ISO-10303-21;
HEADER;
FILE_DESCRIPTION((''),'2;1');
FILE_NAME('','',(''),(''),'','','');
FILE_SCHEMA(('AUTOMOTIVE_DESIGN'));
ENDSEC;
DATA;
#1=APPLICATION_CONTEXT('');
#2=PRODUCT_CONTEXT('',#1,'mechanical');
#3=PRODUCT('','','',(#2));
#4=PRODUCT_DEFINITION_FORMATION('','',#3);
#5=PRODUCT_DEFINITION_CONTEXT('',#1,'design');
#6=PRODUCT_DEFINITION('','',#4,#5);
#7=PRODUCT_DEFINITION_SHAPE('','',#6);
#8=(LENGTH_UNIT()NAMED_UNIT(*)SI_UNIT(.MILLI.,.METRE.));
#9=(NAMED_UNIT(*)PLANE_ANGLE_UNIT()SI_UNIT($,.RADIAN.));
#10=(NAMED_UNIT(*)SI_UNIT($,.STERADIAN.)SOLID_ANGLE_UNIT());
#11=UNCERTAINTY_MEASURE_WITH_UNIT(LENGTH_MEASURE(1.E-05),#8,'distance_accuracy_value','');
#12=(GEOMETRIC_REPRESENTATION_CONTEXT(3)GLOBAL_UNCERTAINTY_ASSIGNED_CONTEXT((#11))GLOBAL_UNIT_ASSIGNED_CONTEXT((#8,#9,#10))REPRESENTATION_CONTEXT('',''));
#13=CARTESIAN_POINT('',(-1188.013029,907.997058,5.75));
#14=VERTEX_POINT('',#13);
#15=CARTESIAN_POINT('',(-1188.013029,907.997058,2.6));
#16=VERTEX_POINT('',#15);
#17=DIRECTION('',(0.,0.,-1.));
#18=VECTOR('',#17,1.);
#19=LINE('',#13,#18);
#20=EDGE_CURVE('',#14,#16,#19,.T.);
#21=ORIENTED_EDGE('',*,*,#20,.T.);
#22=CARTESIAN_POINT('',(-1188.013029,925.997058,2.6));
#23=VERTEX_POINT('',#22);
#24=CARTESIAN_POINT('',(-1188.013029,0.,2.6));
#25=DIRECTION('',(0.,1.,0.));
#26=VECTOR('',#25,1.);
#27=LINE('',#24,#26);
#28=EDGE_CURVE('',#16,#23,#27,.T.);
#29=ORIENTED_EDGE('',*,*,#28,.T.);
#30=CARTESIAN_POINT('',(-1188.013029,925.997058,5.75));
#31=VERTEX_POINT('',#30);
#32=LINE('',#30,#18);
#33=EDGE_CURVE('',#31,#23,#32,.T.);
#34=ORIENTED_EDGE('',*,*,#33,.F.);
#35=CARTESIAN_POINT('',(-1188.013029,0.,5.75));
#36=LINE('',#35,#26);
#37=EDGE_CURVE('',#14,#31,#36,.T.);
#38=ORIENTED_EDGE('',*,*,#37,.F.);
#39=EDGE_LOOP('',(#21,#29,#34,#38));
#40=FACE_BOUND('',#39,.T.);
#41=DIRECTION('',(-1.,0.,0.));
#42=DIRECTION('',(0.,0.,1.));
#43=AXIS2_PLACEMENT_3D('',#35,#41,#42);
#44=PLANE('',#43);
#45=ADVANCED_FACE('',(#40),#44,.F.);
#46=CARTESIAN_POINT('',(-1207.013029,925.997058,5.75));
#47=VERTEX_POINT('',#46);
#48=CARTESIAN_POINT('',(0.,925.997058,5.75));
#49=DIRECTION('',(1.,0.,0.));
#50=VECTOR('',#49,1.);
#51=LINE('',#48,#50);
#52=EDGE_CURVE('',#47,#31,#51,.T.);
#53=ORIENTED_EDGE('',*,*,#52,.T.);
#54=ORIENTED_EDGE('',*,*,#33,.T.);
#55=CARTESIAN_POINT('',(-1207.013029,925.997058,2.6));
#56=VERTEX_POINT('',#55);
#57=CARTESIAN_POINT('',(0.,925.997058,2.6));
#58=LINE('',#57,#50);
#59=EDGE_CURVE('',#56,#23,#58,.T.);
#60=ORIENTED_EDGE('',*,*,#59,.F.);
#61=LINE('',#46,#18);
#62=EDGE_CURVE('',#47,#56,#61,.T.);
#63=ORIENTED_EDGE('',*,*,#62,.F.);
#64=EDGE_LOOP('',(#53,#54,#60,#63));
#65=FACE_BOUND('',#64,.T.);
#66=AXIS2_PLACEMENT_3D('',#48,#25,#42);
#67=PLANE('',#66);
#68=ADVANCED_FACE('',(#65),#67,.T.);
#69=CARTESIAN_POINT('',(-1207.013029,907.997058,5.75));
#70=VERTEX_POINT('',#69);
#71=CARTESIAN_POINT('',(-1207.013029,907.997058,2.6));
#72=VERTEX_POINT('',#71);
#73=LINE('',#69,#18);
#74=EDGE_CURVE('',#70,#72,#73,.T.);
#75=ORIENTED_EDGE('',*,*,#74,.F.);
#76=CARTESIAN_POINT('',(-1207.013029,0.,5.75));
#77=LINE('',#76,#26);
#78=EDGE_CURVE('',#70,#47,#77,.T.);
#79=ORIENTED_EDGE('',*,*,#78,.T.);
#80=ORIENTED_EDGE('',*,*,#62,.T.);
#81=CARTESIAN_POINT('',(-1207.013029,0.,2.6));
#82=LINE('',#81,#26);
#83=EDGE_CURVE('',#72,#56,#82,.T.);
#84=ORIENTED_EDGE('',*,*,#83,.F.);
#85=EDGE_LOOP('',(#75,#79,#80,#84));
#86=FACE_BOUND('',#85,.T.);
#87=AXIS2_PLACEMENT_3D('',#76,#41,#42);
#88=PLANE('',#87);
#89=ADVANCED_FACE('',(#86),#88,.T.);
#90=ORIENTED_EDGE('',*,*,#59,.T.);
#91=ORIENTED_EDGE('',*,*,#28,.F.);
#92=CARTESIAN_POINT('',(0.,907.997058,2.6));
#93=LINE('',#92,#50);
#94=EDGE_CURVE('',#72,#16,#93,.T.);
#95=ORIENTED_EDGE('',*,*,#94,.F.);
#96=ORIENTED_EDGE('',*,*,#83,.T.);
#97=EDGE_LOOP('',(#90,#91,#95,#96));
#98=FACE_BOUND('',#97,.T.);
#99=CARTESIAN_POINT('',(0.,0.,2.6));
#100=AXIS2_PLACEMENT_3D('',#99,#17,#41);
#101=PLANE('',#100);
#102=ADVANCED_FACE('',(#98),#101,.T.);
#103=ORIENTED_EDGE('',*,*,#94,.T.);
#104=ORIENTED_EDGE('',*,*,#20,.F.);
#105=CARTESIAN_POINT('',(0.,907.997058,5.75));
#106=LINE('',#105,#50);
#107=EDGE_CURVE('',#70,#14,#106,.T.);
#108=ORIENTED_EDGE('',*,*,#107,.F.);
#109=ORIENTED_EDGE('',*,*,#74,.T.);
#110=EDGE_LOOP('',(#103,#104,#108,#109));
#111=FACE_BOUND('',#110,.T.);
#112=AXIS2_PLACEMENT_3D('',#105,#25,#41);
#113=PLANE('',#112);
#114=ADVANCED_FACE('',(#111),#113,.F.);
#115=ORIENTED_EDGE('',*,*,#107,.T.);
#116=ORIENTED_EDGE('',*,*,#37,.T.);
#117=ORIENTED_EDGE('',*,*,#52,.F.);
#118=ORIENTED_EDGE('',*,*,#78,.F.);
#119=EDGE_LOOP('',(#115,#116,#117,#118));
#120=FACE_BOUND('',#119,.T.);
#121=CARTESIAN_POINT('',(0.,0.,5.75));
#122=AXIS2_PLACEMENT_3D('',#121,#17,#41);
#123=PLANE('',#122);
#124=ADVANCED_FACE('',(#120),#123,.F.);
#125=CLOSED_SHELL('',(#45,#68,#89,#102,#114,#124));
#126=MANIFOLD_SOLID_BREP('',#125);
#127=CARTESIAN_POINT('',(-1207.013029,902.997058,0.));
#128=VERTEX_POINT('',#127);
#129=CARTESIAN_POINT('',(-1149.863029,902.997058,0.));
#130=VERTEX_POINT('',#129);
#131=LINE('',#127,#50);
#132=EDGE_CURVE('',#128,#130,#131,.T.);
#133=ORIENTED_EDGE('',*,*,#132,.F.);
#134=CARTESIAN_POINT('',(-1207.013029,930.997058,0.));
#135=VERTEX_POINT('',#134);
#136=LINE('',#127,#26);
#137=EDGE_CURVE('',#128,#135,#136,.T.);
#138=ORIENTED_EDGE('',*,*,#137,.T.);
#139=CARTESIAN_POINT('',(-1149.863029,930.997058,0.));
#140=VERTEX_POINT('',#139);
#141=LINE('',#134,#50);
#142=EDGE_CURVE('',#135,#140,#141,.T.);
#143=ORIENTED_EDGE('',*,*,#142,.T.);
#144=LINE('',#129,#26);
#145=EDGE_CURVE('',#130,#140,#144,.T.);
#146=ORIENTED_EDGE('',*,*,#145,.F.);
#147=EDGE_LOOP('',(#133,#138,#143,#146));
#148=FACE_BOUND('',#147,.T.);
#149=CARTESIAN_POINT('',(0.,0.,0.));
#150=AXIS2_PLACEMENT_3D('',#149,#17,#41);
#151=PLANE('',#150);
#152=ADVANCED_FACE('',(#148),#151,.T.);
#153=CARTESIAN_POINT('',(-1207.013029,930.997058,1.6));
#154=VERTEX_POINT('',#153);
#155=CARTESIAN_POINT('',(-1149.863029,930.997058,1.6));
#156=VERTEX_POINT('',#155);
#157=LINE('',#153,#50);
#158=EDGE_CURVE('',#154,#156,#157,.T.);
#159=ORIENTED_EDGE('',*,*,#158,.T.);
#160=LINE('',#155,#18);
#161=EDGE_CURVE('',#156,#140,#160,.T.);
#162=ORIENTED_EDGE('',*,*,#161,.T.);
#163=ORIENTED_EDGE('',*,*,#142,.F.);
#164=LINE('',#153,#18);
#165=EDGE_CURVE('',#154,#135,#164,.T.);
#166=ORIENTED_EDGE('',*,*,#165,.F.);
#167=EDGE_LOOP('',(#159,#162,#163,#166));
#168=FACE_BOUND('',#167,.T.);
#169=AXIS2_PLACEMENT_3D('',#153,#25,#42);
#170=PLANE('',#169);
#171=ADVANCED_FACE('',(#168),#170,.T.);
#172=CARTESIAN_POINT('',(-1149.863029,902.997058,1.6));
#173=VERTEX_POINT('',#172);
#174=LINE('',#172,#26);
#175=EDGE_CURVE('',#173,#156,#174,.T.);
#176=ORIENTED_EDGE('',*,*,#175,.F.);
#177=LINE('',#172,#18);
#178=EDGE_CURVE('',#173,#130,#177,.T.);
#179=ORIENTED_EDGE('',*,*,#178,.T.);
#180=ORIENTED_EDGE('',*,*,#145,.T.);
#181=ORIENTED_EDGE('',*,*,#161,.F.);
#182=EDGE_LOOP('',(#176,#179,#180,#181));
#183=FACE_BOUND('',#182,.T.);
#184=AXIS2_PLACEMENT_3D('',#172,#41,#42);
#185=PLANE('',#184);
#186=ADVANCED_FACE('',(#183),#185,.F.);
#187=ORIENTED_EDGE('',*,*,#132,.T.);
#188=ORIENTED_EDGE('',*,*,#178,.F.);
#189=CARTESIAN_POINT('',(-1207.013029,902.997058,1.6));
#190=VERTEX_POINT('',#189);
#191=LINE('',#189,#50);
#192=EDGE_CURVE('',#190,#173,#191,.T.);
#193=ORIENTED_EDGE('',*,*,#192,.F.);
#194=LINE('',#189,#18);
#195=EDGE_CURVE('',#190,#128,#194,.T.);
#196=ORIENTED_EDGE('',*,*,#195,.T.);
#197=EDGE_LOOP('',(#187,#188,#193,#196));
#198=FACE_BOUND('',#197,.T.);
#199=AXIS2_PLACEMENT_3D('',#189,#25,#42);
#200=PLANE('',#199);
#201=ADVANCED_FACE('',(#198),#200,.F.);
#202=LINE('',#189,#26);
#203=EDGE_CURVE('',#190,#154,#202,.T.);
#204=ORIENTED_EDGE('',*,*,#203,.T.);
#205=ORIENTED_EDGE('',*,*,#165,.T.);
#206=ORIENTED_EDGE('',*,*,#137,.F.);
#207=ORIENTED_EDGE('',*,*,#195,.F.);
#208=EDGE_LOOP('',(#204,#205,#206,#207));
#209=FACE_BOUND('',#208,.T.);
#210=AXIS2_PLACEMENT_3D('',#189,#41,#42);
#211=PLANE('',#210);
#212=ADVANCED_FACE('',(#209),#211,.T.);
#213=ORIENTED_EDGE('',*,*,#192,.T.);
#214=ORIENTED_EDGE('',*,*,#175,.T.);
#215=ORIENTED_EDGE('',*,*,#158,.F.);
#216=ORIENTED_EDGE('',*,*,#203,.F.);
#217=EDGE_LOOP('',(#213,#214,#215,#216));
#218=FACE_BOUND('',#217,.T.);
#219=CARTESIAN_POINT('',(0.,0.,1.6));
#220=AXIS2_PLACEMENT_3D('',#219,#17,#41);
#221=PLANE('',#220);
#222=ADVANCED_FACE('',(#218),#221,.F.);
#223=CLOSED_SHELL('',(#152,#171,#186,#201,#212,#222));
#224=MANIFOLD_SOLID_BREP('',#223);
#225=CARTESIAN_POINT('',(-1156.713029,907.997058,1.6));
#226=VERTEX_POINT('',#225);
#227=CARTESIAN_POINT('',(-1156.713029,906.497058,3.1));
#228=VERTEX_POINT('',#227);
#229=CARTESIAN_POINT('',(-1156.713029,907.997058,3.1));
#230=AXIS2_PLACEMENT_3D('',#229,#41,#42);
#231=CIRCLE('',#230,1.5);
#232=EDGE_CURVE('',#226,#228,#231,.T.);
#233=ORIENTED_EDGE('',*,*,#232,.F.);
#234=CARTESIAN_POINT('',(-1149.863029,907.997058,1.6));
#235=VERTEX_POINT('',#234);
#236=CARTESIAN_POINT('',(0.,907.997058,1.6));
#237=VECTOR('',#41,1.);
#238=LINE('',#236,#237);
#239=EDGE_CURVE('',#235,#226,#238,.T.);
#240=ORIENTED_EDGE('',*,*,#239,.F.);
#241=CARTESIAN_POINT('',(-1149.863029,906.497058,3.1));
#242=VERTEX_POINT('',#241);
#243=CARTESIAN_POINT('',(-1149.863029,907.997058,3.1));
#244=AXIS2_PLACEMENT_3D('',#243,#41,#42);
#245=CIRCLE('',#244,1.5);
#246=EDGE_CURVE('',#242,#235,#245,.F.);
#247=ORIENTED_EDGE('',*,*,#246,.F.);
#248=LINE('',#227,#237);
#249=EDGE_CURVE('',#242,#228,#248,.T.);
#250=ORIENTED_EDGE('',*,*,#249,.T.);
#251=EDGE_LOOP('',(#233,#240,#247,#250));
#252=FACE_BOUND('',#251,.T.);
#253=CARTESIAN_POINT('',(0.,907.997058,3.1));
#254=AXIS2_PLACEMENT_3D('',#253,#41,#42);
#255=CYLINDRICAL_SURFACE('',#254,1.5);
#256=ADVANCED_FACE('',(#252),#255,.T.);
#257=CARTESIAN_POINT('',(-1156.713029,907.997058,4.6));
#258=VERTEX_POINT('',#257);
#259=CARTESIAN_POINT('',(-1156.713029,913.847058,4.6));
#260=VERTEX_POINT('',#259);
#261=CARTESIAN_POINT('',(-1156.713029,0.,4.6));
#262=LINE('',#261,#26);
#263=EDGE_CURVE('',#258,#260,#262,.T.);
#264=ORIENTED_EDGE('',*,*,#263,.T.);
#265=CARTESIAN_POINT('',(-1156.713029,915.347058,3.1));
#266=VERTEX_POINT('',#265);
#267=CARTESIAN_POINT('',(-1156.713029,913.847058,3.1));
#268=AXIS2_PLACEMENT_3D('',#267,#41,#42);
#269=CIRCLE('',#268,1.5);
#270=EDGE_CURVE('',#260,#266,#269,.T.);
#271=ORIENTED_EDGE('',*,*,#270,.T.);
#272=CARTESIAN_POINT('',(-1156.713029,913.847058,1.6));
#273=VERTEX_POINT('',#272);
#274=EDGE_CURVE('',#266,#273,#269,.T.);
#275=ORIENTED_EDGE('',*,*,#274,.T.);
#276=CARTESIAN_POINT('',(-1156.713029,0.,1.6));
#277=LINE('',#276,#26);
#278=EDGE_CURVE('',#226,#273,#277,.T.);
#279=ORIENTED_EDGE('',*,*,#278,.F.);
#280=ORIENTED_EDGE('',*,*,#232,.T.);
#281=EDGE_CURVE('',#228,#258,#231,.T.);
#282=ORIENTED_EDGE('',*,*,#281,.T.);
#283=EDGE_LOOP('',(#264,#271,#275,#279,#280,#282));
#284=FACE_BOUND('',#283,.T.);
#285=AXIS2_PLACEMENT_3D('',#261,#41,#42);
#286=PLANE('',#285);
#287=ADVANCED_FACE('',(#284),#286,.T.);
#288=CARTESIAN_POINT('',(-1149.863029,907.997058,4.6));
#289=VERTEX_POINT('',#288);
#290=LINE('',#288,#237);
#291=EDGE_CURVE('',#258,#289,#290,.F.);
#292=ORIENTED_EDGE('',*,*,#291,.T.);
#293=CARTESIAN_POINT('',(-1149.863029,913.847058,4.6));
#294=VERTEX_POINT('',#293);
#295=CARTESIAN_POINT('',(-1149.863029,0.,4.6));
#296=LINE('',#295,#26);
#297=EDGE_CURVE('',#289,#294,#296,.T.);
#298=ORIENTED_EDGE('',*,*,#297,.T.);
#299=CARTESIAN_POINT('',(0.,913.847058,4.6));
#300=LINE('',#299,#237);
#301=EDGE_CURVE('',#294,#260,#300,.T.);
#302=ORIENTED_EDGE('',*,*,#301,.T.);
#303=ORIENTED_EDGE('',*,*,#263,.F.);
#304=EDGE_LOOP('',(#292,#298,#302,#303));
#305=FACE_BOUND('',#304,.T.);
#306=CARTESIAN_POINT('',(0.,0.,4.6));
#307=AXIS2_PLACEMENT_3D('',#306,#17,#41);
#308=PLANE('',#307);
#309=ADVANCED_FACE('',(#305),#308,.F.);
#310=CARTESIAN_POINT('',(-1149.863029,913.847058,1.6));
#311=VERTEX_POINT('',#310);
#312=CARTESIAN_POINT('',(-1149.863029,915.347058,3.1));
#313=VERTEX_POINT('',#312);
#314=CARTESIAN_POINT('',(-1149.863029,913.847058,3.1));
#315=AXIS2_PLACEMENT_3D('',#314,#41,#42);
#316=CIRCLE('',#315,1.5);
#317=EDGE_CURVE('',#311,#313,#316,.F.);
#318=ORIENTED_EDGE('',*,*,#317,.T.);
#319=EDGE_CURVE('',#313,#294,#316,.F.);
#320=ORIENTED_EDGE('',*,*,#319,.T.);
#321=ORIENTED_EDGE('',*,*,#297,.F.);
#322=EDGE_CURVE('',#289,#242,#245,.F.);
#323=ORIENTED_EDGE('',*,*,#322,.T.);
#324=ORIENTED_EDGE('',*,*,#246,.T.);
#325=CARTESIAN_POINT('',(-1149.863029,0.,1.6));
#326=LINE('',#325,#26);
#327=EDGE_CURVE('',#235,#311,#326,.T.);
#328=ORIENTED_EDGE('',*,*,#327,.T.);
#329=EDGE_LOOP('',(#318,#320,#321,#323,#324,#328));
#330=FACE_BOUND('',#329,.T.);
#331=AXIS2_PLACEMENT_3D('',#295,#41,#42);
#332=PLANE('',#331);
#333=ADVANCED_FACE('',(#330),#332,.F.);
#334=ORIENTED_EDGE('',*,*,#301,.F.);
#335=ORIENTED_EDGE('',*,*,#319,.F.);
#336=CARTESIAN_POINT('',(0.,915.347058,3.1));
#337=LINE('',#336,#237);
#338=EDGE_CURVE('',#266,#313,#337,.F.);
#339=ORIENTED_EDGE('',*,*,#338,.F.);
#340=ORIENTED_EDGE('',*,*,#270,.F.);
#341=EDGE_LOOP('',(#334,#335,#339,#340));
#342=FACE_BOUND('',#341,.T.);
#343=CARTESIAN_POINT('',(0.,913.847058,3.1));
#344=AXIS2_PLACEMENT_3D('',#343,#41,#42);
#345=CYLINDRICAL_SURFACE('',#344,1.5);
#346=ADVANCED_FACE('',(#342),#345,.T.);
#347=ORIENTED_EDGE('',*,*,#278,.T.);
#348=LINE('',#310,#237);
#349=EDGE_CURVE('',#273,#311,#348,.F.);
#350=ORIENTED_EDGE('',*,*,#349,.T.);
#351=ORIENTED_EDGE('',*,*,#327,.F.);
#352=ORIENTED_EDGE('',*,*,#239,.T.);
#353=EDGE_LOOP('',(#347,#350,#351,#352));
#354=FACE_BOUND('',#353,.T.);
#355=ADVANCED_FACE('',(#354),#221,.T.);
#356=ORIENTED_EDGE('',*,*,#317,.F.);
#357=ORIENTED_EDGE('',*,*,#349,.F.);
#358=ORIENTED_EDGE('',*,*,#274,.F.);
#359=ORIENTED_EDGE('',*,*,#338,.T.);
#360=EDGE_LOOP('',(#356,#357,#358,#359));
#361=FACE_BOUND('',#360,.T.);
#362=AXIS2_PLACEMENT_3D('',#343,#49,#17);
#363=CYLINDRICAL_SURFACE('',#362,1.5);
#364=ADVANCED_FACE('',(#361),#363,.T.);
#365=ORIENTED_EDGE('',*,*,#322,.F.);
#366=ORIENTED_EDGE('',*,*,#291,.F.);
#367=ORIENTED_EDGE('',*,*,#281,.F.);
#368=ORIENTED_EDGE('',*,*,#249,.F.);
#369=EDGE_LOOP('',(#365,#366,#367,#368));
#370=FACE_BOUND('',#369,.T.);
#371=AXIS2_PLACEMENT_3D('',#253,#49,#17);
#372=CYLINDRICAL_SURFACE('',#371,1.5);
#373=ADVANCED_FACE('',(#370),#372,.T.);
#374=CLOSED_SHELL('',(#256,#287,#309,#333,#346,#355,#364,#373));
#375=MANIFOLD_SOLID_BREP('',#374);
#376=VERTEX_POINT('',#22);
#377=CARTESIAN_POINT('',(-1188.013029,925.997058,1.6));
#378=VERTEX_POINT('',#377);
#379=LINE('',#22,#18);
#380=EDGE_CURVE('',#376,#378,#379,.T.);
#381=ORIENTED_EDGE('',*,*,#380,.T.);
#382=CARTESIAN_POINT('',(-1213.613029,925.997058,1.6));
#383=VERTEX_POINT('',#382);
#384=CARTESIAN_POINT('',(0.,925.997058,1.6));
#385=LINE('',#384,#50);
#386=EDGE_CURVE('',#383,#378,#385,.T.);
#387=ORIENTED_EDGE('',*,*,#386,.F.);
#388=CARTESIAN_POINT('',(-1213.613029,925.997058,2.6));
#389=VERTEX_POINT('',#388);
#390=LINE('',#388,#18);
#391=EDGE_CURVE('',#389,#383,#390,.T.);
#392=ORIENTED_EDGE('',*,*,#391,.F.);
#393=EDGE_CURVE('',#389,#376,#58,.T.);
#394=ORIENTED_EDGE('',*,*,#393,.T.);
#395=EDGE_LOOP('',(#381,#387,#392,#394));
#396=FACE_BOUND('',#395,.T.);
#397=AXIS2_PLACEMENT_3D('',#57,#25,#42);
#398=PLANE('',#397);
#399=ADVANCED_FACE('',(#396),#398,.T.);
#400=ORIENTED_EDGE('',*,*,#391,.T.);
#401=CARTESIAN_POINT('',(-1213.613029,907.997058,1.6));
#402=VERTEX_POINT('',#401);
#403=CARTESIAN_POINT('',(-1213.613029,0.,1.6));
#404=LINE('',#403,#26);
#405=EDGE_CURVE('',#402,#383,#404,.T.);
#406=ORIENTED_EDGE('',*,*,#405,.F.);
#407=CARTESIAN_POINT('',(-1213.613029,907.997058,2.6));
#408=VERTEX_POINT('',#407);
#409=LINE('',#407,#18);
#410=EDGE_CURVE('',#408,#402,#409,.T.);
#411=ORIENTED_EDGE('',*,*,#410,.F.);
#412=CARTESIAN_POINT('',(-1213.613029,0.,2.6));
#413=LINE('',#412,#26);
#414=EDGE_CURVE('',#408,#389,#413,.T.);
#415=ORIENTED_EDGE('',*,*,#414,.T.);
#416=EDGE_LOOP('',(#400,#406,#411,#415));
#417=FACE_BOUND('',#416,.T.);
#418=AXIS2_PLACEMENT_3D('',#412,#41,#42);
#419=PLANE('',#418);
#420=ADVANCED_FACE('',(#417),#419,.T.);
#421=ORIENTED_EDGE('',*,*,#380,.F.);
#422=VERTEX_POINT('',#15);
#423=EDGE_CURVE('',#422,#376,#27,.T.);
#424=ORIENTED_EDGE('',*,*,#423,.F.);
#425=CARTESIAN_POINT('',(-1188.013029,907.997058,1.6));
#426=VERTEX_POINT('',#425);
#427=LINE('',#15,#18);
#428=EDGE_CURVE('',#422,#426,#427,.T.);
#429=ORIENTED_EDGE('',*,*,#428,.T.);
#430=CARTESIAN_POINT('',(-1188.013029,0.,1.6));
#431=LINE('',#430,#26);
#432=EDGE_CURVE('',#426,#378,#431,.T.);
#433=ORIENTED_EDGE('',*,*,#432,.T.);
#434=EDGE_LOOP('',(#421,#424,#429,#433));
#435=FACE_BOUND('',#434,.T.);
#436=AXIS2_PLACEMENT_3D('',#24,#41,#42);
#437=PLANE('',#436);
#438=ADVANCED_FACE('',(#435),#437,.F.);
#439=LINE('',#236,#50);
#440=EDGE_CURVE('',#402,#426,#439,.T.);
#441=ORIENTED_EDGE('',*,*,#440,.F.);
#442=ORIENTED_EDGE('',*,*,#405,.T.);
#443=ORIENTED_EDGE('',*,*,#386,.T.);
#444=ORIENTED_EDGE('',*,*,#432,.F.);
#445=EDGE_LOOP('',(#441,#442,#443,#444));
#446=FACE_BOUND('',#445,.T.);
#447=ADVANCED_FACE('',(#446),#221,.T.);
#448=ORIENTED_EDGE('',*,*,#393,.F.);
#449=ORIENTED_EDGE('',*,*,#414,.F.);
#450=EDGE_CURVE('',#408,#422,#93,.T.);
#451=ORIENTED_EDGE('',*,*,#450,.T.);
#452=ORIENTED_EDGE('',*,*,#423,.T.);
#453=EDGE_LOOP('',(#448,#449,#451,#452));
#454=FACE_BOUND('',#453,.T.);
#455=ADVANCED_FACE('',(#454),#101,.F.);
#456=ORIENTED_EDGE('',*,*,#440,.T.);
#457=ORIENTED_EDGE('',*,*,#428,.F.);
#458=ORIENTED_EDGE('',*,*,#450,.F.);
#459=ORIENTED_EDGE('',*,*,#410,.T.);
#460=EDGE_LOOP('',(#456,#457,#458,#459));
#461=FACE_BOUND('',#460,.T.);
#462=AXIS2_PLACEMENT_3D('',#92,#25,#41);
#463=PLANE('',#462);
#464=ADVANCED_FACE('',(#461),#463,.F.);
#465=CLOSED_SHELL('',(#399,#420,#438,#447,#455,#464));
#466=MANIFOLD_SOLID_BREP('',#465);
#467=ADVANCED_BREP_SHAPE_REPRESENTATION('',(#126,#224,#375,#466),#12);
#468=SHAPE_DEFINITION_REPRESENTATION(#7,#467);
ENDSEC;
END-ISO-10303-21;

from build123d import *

# Parameters (mm, degrees)
SKETCH1_W           = 28
SKETCH1_H           = 57.15
BOSS_EXTRUDE1_DEPTH = 1.6
BOSS_EXTRUDE2_START = 1.6
SKETCH1_4_W         = 8.85
SKETCH1_4_H         = 6.85
BOSS_EXTRUDE2_DEPTH = 3
FILLET1_R           = 1.5
BOSS_EXTRUDE3_START = 1.6
SKETCH1_5_W         = 18
SKETCH1_5_H         = 6.6
SKETCH1_5_H_2       = 19
BOSS_EXTRUDE3_DEPTH = 1
BOSS_EXTRUDE4_START = 2.6
SKETCH1_6_W         = 18
SKETCH1_6_H         = 19
BOSS_EXTRUDE4_DEPTH = 3.15


with BuildPart() as part:
    # Sketch1 → Boss-Extrude1 (new body)
    with BuildSketch(Plane(origin=(0, 0, 0), x_dir=(0, 1, 0), z_dir=(0, 0, 1))):
        with Locations((916.997058045, 1178.438029113)):
            Rectangle(SKETCH1_W, SKETCH1_H)
    extrude(amount=BOSS_EXTRUDE1_DEPTH)


with BuildPart() as body_2:
    # Sketch1<4> → Boss-Extrude2 (new body)
    with BuildSketch(Plane(origin=(0, 0, 0), x_dir=(0, 1, 0), z_dir=(0, 0, 1)).offset(BOSS_EXTRUDE2_START)):
        with Locations((910.922058045, 1153.288029113)):
            Rectangle(SKETCH1_4_W, SKETCH1_4_H)
    extrude(amount=BOSS_EXTRUDE2_DEPTH)

    # Fillet1
    fillet1_edges = [body_2.edges().sort_by_distance(p)[0] for p in [
        (-1153.288029113, 906.497058045, 1.6),
        (-1153.288029113, 915.347058045, 1.6),
        (-1153.288029113, 915.347058045, 4.6),
        (-1153.288029113, 906.497058045, 4.6),
    ]]
    fillet(fillet1_edges, radius=FILLET1_R - 0.0001)  # a hair under: the kernel refuses the full size


with BuildPart() as body_3:
    # Sketch1<5> → Boss-Extrude3 (new body)
    with BuildSketch(Plane(origin=(0, 0, 0), x_dir=(0, 1, 0), z_dir=(0, 0, 1)).offset(BOSS_EXTRUDE3_START)):
        with Locations((916.997058045, 1210.313029113)):
            Rectangle(SKETCH1_5_W, SKETCH1_5_H)
        with Locations((916.997058045, 1197.513029113)):
            Rectangle(SKETCH1_5_W, SKETCH1_5_H_2)
    extrude(amount=BOSS_EXTRUDE3_DEPTH)


with BuildPart() as body_4:
    # Sketch1<6> → Boss-Extrude4 (new body)
    with BuildSketch(Plane(origin=(0, 0, 0), x_dir=(0, 1, 0), z_dir=(0, 0, 1)).offset(BOSS_EXTRUDE4_START)):
        with Locations((916.997058045, 1197.513029113)):
            Rectangle(SKETCH1_6_W, SKETCH1_6_H)
    extrude(amount=BOSS_EXTRUDE4_DEPTH)


solid = Compound([part.part, body_2.part, body_3.part, body_4.part])
